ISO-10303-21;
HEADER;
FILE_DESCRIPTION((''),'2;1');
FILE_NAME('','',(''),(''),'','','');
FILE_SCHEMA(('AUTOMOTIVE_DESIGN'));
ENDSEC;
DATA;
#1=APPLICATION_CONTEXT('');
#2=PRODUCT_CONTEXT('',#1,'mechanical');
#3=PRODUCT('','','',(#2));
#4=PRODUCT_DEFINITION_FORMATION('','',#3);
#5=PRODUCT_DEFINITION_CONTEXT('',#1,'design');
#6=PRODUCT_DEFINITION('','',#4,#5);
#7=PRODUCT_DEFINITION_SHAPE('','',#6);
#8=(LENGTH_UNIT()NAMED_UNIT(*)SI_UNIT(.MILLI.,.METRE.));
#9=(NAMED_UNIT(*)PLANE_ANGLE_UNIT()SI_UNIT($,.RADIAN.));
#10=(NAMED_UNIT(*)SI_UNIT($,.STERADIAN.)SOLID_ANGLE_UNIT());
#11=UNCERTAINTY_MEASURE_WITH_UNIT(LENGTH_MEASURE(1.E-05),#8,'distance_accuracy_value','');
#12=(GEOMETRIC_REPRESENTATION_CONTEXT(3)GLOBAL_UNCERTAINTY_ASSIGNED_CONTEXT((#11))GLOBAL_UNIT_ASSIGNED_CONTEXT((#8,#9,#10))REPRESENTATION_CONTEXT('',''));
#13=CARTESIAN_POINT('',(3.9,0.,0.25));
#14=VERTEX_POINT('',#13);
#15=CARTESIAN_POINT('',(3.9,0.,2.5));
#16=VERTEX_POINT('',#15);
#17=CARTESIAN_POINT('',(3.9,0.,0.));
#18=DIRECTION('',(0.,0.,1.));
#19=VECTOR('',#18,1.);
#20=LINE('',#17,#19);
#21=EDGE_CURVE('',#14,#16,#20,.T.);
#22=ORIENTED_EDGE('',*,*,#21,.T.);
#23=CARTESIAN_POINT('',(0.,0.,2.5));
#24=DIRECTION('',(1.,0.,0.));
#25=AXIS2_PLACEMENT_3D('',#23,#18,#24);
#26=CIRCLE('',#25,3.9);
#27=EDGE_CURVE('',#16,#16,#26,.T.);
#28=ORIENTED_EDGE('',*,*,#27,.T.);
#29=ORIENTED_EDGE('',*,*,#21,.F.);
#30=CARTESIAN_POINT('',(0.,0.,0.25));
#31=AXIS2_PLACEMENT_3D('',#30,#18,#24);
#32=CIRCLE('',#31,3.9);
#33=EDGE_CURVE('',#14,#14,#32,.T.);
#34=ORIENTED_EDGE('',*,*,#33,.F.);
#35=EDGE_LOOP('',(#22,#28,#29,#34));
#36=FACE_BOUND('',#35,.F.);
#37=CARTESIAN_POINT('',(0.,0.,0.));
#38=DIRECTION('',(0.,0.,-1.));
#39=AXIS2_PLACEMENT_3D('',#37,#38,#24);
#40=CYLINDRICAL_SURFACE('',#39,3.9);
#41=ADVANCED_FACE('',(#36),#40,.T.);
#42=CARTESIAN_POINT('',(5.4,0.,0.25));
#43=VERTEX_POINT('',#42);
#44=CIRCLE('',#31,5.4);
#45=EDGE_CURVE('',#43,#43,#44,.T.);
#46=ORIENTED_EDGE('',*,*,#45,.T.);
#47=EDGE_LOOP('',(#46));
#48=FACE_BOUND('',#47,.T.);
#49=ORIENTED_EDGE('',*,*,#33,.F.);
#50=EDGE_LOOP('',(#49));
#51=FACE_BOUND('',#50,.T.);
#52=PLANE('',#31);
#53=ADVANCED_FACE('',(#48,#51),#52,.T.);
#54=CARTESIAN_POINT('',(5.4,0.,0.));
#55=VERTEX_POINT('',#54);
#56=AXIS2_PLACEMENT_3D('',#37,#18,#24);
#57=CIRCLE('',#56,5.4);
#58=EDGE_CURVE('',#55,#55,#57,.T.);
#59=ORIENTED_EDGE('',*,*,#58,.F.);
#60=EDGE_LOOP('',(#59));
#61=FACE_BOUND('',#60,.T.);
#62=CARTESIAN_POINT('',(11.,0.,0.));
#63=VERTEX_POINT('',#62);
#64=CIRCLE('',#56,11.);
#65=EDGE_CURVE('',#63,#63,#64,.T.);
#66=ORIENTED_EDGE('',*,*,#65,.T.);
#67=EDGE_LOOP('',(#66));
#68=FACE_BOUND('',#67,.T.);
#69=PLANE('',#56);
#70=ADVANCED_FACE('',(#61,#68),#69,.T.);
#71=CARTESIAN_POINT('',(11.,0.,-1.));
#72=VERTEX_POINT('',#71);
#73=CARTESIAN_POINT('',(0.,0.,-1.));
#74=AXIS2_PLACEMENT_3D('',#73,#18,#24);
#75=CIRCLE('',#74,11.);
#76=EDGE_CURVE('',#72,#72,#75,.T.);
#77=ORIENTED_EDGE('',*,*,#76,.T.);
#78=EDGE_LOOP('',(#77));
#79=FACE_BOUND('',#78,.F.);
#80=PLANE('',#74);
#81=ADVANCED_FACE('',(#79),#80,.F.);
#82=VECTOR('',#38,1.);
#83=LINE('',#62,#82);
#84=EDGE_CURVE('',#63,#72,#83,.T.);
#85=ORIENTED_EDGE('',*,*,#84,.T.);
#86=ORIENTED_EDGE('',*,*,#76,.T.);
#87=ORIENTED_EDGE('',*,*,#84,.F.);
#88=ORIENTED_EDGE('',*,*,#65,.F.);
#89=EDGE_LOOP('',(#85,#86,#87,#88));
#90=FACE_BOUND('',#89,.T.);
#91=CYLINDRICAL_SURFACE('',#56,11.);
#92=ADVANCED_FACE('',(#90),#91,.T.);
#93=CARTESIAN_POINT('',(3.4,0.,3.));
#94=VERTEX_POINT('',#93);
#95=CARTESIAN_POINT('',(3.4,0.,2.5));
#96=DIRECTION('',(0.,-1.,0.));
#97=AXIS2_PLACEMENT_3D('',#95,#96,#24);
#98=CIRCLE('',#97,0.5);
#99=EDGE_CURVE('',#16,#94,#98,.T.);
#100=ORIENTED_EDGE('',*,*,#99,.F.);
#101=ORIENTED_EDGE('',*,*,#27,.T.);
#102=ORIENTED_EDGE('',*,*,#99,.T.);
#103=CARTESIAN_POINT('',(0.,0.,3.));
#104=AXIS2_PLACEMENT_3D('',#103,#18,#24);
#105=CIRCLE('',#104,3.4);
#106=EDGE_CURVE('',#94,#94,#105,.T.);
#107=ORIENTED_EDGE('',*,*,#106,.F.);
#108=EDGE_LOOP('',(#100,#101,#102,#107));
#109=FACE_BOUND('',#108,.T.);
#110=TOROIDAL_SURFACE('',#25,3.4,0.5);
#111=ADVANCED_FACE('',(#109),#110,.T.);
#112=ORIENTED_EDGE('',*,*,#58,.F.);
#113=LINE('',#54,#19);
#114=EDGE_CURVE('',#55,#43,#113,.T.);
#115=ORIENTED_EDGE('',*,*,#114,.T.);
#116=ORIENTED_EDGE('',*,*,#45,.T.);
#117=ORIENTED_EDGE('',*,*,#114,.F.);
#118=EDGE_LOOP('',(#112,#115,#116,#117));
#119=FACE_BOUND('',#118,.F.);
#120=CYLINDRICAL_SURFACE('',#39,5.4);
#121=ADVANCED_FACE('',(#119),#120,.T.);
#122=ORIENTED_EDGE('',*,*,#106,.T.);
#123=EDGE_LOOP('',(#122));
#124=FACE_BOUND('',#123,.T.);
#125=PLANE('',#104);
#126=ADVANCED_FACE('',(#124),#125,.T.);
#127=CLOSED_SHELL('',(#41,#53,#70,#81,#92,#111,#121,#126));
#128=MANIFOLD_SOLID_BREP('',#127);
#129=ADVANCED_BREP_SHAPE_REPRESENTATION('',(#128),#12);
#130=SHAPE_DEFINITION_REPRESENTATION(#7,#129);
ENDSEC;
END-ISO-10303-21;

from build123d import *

# Parameters (mm, degrees)
F2_R     = 11
F2_R_2   = 5.4
F2_R_3   = 3.9
F3_DEPTH = 1
F4_DEPTH = 3
F5_DEPTH = 0.25
F6_R     = 0.5


# Not quite as in the source:
# - a feature names something its author has since deleted; it is built from what else it names


with BuildPart() as f3:
    # F2 (on Top) → F3 (new body)
    with BuildSketch(Plane.XY):
        Circle(F2_R)
        Circle(F2_R_2, mode=Mode.SUBTRACT)
        Circle(F2_R_2)
        Circle(F2_R_3, mode=Mode.SUBTRACT)
        Circle(F2_R_3)
    extrude(amount=-F3_DEPTH)

    # F2 (on Top) → F4 (join)
    with BuildSketch(Plane.XY):
        Circle(F2_R_3)
    extrude(amount=F4_DEPTH)

    # F2 (on Top) → F5 (join)
    with BuildSketch(Plane.XY):
        Circle(F2_R_2)
        Circle(F2_R_3, mode=Mode.SUBTRACT)
    extrude(amount=F5_DEPTH)

    # F6
    f6_edges = [f3.edges().sort_by_distance(p)[0] for p in [
        (-3.9, 0, 3),
    ]]
    fillet(f6_edges, radius=F6_R)


solid = f3.part
